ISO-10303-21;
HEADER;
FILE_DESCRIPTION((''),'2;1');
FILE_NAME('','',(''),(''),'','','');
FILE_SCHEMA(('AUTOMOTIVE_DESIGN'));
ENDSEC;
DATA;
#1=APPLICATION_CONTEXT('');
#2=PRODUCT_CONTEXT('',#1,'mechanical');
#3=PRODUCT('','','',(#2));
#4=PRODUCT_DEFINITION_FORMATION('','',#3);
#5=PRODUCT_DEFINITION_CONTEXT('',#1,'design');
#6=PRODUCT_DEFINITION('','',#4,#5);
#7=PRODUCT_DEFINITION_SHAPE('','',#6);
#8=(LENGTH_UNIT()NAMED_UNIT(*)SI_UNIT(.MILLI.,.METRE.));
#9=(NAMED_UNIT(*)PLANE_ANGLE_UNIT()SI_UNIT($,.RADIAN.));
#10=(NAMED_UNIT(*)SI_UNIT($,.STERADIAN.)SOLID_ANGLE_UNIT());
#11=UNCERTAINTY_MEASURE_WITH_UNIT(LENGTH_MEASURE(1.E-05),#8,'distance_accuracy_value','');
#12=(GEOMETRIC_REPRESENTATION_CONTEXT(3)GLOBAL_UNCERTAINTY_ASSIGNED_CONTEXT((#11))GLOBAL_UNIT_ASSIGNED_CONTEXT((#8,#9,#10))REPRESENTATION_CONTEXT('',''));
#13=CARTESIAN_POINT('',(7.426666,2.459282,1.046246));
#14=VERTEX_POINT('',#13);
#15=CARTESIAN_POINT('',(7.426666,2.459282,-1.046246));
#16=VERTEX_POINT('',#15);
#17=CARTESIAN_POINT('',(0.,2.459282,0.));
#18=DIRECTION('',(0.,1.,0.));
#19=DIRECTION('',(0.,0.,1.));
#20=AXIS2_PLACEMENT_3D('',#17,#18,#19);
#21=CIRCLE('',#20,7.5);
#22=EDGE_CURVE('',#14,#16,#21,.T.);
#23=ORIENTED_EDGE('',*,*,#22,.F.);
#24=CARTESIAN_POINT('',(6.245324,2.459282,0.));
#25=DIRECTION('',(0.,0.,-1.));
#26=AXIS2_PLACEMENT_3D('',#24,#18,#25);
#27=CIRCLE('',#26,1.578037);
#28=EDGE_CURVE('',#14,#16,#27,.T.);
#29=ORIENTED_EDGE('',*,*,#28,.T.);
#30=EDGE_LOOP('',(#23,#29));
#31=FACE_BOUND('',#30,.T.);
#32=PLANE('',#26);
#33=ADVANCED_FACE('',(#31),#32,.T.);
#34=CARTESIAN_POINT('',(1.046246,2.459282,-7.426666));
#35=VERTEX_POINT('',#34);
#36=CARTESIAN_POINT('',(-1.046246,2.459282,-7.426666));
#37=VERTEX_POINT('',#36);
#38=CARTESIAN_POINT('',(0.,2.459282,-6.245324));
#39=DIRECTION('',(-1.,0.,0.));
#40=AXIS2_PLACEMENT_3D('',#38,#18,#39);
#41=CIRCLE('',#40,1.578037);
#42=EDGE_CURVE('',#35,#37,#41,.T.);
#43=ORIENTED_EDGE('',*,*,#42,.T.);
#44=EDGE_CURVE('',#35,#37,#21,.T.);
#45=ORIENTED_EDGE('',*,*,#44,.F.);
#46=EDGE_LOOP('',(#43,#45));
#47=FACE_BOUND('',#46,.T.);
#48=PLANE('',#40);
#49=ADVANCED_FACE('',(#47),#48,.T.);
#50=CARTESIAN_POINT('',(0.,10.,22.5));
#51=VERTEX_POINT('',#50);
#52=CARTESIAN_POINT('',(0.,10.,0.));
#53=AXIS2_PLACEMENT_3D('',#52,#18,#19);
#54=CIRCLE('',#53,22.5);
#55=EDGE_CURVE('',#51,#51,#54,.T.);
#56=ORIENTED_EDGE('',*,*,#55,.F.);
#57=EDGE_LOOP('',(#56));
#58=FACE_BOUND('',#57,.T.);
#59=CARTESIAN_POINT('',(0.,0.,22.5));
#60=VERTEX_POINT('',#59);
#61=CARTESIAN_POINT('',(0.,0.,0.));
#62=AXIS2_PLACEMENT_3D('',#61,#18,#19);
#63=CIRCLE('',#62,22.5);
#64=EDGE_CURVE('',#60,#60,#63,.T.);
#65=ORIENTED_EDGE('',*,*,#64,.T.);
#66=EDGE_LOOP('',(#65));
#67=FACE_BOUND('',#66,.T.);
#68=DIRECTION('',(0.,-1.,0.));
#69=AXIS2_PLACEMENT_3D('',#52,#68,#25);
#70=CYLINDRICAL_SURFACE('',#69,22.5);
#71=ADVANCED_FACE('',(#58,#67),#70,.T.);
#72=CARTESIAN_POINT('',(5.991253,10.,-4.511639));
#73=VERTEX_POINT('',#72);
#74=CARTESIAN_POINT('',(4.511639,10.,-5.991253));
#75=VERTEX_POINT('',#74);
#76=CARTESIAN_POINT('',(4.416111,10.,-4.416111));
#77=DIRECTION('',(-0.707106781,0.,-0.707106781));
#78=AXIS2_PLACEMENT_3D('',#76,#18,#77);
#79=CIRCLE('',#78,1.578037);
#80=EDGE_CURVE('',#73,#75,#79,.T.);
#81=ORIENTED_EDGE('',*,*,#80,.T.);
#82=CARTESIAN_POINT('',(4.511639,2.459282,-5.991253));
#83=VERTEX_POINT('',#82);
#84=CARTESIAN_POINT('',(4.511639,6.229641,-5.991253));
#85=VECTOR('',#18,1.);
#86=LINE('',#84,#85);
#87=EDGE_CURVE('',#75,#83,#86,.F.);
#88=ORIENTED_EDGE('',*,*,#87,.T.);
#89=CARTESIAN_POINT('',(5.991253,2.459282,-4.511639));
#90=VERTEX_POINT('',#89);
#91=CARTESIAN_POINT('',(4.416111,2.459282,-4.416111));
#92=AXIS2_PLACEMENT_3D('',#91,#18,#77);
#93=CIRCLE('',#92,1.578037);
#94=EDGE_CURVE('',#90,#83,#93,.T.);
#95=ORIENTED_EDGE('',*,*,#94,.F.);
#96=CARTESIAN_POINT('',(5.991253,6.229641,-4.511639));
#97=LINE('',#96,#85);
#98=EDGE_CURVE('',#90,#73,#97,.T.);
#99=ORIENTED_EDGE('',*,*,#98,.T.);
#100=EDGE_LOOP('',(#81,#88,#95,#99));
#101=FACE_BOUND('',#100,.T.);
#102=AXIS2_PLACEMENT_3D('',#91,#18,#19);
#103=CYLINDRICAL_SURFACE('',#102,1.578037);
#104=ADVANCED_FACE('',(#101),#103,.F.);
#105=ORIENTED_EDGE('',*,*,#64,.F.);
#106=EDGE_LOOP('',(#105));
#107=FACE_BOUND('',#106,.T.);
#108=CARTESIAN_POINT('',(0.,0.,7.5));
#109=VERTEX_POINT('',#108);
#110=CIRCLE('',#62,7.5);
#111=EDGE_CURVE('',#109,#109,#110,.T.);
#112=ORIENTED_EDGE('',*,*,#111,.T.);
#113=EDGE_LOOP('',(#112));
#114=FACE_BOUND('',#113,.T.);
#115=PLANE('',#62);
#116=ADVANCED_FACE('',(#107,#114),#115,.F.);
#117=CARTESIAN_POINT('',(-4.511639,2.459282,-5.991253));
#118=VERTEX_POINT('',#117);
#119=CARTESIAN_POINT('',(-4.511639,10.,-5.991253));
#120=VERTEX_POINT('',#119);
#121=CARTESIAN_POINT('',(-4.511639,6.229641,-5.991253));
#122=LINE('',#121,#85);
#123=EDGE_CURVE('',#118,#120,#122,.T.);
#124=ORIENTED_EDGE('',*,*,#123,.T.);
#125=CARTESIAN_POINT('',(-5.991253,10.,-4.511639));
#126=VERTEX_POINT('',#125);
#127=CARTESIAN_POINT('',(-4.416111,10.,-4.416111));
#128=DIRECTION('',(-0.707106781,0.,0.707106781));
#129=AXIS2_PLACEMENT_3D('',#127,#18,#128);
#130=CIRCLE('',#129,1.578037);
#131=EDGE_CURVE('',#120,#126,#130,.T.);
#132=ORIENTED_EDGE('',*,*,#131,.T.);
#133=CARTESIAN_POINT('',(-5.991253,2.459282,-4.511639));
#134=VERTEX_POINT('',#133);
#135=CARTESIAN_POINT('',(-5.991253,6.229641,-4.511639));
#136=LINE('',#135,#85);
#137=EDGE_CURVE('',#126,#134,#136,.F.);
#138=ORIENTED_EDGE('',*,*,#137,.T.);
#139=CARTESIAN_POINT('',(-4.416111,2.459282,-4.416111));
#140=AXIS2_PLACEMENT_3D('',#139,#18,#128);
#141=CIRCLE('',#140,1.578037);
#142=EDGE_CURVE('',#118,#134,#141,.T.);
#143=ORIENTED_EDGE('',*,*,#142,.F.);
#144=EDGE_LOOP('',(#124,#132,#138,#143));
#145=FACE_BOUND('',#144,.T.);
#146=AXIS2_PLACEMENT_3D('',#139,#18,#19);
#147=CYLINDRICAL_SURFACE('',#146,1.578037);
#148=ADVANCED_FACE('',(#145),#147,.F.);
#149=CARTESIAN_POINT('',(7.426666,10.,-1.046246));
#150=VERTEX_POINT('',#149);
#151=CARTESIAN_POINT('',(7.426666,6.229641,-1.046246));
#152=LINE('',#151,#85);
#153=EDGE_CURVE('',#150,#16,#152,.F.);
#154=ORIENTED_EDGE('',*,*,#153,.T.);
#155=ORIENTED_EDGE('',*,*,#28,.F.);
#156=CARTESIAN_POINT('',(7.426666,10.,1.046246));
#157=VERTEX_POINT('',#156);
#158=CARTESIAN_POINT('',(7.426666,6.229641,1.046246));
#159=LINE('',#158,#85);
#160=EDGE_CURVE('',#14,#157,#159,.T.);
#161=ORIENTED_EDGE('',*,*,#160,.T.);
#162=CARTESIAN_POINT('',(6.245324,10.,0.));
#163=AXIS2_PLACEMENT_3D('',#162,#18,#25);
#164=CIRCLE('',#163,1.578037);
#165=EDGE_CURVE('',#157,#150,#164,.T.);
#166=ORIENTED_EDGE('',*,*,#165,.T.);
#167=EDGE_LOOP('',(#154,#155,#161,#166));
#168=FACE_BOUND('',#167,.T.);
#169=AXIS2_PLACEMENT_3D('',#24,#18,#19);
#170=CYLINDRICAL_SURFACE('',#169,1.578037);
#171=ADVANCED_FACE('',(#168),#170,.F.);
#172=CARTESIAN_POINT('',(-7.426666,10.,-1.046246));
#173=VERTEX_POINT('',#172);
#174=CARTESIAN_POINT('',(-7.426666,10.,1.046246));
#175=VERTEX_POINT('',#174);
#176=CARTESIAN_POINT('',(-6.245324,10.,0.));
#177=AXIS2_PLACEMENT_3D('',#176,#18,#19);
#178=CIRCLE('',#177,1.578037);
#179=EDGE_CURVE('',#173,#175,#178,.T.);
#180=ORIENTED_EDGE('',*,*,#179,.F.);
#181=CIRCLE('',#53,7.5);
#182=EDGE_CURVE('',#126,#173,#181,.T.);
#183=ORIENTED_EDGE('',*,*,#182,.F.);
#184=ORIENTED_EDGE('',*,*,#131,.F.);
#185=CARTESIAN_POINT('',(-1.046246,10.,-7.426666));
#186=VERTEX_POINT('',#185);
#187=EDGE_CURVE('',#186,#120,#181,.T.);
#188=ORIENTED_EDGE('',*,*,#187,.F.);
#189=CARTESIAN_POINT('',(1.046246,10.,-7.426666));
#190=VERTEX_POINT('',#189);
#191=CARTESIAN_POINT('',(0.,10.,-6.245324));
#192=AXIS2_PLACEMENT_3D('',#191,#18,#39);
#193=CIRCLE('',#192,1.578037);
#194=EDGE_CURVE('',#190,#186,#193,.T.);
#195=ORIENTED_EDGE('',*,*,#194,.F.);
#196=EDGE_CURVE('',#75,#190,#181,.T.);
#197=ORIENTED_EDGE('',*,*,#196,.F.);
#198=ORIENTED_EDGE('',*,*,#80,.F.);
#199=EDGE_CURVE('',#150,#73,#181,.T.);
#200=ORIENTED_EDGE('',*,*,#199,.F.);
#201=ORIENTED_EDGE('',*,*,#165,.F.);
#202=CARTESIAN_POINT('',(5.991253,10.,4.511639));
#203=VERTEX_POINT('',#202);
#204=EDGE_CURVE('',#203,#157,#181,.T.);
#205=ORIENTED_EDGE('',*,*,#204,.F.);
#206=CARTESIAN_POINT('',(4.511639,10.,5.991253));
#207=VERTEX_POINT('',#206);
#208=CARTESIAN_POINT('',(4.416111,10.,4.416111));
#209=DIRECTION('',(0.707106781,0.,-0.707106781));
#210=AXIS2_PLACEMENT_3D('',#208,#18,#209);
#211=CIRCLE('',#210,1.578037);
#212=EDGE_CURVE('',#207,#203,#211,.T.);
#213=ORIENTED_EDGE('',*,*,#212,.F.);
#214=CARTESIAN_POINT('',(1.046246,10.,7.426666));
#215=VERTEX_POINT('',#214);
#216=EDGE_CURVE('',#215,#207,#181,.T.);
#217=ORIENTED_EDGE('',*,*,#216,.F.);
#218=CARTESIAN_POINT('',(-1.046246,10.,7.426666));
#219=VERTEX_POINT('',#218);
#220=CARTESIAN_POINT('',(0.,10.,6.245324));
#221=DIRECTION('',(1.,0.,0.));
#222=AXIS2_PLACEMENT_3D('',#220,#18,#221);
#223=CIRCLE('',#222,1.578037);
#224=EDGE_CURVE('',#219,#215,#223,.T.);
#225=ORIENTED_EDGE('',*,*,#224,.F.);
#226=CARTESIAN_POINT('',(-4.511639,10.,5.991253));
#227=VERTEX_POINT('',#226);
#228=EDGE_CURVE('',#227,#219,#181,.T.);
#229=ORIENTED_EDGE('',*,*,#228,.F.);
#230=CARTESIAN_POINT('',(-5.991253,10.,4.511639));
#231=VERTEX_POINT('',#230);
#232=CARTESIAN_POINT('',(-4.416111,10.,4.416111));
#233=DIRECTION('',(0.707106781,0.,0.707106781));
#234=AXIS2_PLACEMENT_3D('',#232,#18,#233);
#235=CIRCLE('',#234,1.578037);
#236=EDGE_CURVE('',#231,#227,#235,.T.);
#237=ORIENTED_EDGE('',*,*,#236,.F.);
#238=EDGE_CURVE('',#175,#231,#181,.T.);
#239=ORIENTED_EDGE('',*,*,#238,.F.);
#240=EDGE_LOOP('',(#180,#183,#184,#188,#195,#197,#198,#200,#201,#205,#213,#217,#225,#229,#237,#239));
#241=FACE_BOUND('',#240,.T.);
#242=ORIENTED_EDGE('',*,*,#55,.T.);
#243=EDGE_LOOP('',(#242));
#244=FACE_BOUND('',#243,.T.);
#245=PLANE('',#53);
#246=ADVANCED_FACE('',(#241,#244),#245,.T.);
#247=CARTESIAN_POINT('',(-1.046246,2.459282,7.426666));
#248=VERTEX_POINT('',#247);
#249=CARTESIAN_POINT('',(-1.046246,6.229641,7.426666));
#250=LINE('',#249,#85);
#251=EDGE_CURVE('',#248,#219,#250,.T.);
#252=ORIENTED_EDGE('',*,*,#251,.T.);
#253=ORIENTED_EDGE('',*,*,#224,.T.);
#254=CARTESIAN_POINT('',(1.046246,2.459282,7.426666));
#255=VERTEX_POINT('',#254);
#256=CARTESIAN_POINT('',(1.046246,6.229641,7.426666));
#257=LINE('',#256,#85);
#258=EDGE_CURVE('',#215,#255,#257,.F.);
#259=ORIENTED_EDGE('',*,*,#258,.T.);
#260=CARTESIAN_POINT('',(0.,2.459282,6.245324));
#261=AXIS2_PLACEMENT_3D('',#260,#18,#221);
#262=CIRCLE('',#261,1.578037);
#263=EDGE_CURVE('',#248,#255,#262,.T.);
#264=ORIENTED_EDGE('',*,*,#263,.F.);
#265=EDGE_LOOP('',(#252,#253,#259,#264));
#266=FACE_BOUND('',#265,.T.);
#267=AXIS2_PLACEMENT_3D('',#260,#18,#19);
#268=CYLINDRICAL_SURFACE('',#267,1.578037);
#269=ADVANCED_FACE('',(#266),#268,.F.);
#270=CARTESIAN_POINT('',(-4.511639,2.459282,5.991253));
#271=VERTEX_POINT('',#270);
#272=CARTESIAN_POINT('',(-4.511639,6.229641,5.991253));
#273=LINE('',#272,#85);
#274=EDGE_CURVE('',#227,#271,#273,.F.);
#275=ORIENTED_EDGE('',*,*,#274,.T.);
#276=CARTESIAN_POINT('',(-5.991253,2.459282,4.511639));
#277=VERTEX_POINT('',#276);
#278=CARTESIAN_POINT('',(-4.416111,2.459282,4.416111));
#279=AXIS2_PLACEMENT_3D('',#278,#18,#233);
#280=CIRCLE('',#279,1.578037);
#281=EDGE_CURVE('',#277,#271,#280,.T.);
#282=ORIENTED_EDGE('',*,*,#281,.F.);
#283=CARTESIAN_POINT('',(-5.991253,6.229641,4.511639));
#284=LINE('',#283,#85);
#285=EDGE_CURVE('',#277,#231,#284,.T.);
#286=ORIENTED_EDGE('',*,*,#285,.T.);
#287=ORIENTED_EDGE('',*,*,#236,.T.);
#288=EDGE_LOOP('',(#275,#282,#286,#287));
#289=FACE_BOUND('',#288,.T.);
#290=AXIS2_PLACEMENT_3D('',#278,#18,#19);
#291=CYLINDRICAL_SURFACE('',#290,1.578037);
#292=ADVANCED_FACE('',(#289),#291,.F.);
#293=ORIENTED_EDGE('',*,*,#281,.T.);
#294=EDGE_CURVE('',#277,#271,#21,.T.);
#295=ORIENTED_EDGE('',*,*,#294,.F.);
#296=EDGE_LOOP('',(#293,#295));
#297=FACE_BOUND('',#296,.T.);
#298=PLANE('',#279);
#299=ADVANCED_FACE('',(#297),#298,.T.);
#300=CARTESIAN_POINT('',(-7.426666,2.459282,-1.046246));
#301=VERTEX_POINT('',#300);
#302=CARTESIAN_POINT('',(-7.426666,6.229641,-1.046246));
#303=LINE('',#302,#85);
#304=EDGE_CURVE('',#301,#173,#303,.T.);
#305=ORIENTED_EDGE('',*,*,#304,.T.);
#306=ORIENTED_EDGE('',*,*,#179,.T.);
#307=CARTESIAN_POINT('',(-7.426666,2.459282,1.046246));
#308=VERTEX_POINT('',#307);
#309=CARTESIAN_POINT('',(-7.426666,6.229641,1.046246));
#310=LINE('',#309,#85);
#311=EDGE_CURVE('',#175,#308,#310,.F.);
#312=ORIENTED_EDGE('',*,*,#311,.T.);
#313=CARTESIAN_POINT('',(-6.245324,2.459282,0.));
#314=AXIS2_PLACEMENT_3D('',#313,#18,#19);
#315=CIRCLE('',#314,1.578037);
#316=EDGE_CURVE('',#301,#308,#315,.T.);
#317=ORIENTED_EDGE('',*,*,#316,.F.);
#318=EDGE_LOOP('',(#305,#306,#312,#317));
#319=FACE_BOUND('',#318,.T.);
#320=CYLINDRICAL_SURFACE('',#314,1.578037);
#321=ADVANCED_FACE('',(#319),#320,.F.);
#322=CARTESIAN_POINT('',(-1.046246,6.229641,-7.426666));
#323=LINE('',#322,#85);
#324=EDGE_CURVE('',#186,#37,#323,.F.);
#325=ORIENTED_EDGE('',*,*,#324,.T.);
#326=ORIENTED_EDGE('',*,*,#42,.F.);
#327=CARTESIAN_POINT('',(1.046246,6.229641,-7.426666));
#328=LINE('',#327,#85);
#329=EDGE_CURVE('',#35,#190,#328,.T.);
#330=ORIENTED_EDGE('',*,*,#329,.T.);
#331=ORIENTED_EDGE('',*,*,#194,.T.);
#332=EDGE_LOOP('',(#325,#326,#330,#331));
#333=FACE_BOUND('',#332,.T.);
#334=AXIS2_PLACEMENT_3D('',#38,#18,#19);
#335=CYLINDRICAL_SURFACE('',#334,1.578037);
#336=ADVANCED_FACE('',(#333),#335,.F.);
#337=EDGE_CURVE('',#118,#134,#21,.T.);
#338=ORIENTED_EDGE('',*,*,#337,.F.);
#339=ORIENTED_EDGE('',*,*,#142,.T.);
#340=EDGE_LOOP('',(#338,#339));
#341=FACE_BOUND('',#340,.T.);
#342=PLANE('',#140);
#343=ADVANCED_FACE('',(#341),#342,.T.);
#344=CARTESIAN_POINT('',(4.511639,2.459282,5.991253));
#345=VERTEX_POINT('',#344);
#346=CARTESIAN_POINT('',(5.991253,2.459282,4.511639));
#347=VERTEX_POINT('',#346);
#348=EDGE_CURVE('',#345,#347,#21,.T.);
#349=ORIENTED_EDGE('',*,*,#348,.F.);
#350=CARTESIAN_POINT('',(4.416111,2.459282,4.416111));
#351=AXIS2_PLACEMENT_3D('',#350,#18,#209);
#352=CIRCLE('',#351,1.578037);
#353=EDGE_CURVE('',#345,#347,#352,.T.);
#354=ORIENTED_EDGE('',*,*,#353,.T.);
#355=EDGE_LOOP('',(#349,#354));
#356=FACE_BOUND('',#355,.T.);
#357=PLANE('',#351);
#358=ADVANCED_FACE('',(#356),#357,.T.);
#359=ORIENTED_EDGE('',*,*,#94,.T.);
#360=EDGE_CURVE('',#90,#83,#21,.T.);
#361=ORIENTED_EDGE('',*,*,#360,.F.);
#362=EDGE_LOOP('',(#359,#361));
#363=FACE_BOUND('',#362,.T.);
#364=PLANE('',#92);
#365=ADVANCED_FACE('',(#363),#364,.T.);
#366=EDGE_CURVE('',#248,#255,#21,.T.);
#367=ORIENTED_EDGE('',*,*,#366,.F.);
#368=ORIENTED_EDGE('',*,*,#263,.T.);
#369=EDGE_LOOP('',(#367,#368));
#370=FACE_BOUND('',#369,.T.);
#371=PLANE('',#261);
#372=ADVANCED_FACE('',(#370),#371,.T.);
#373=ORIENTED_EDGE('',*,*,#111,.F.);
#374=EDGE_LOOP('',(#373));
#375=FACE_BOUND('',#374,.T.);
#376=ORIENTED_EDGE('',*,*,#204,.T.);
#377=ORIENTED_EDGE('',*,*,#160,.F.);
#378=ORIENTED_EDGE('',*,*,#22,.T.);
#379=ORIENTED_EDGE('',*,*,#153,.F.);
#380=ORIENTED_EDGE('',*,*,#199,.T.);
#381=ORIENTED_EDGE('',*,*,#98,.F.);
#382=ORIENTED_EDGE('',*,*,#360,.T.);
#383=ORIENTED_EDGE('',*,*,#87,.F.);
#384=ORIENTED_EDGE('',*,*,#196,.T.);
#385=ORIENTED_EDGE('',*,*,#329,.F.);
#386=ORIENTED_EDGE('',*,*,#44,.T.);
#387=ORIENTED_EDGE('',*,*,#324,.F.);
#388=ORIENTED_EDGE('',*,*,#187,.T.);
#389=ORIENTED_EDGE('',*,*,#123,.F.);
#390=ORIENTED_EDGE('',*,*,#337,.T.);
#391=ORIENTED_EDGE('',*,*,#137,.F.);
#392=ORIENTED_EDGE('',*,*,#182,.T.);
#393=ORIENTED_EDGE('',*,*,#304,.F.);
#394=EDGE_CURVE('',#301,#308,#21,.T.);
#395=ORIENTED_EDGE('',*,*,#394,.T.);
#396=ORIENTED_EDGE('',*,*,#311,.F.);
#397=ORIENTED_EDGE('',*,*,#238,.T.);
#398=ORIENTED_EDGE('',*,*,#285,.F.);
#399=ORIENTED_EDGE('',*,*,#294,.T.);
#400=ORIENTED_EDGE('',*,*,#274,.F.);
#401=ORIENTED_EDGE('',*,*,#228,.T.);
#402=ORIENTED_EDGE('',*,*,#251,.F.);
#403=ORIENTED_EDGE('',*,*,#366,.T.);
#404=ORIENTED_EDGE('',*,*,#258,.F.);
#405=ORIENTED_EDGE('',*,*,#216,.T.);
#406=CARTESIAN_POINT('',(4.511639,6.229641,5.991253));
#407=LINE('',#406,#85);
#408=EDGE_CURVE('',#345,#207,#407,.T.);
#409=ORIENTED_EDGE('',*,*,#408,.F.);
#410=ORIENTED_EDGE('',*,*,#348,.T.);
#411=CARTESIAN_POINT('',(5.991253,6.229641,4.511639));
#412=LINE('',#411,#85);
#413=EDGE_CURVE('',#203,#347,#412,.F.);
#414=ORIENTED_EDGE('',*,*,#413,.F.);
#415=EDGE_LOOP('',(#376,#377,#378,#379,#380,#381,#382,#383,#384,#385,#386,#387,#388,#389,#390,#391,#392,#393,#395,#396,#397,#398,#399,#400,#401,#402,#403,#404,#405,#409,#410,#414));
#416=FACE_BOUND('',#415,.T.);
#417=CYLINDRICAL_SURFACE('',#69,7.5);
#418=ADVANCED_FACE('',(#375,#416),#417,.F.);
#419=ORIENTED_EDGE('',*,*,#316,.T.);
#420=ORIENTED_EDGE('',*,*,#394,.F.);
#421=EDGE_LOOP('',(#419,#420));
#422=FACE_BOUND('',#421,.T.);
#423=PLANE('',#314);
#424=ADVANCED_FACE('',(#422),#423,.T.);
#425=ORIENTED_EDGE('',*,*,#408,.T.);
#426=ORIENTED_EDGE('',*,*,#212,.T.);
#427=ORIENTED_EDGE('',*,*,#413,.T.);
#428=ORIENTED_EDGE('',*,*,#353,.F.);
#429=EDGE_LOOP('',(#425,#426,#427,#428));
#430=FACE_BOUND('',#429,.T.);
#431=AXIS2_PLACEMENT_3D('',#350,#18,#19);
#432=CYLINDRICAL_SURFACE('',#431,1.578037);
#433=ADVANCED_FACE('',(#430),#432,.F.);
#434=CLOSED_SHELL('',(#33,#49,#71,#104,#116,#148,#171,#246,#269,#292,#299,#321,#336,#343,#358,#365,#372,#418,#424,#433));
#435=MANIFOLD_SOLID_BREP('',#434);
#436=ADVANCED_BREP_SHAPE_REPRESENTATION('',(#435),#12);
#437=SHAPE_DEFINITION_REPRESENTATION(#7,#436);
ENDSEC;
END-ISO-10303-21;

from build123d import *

# Parameters (mm, degrees)
SKETCH1_R           = 22.5
BOSS_EXTRUDE1_DEPTH = 10
SKETCH2_R           = 7.5
CUT_EXTRUDE1_DEPTH  = 34.35416016
SKETCH3_R           = 1.578036786
CUT_EXTRUDE2_DEPTH  = 7.540717935
CIRPATTERN1_COUNT   = 8


with BuildPart() as part:
    # Sketch1 → Boss-Extrude1 (new body)
    with BuildSketch(Plane(origin=(0, 0, 0), x_dir=(1, 0, 0), z_dir=(0, 1, 0))):
        Circle(SKETCH1_R)
    extrude(amount=BOSS_EXTRUDE1_DEPTH)

    # Sketch2 → Cut-Extrude1 (cut, through all)
    with BuildSketch(Plane(origin=(0, 0, 0), x_dir=(1, 0, 0), z_dir=(0, 1, 0))):
        Circle(SKETCH2_R)
    extrude(amount=CUT_EXTRUDE1_DEPTH, mode=Mode.SUBTRACT)

    # Sketch3 → Cut-Extrude2 (cut)
    with BuildSketch(Plane(origin=(0, 10, 0), x_dir=(1, 0, 0), z_dir=(0, 1, 0))):
        with Locations((-6.245323663, 0)):
            Circle(SKETCH3_R)
    cut_extrude2 = extrude(amount=-CUT_EXTRUDE2_DEPTH, mode=Mode.SUBTRACT)

    # CirPattern1: Cut-Extrude2 ×8 about axis
    cirpattern1_axis = Axis((0, 0, 0), (0, 1, 0))
    for i in range(1, CIRPATTERN1_COUNT):
        add(cut_extrude2.rotate(cirpattern1_axis, i * 360 / CIRPATTERN1_COUNT), mode=Mode.SUBTRACT)


solid = part.part
